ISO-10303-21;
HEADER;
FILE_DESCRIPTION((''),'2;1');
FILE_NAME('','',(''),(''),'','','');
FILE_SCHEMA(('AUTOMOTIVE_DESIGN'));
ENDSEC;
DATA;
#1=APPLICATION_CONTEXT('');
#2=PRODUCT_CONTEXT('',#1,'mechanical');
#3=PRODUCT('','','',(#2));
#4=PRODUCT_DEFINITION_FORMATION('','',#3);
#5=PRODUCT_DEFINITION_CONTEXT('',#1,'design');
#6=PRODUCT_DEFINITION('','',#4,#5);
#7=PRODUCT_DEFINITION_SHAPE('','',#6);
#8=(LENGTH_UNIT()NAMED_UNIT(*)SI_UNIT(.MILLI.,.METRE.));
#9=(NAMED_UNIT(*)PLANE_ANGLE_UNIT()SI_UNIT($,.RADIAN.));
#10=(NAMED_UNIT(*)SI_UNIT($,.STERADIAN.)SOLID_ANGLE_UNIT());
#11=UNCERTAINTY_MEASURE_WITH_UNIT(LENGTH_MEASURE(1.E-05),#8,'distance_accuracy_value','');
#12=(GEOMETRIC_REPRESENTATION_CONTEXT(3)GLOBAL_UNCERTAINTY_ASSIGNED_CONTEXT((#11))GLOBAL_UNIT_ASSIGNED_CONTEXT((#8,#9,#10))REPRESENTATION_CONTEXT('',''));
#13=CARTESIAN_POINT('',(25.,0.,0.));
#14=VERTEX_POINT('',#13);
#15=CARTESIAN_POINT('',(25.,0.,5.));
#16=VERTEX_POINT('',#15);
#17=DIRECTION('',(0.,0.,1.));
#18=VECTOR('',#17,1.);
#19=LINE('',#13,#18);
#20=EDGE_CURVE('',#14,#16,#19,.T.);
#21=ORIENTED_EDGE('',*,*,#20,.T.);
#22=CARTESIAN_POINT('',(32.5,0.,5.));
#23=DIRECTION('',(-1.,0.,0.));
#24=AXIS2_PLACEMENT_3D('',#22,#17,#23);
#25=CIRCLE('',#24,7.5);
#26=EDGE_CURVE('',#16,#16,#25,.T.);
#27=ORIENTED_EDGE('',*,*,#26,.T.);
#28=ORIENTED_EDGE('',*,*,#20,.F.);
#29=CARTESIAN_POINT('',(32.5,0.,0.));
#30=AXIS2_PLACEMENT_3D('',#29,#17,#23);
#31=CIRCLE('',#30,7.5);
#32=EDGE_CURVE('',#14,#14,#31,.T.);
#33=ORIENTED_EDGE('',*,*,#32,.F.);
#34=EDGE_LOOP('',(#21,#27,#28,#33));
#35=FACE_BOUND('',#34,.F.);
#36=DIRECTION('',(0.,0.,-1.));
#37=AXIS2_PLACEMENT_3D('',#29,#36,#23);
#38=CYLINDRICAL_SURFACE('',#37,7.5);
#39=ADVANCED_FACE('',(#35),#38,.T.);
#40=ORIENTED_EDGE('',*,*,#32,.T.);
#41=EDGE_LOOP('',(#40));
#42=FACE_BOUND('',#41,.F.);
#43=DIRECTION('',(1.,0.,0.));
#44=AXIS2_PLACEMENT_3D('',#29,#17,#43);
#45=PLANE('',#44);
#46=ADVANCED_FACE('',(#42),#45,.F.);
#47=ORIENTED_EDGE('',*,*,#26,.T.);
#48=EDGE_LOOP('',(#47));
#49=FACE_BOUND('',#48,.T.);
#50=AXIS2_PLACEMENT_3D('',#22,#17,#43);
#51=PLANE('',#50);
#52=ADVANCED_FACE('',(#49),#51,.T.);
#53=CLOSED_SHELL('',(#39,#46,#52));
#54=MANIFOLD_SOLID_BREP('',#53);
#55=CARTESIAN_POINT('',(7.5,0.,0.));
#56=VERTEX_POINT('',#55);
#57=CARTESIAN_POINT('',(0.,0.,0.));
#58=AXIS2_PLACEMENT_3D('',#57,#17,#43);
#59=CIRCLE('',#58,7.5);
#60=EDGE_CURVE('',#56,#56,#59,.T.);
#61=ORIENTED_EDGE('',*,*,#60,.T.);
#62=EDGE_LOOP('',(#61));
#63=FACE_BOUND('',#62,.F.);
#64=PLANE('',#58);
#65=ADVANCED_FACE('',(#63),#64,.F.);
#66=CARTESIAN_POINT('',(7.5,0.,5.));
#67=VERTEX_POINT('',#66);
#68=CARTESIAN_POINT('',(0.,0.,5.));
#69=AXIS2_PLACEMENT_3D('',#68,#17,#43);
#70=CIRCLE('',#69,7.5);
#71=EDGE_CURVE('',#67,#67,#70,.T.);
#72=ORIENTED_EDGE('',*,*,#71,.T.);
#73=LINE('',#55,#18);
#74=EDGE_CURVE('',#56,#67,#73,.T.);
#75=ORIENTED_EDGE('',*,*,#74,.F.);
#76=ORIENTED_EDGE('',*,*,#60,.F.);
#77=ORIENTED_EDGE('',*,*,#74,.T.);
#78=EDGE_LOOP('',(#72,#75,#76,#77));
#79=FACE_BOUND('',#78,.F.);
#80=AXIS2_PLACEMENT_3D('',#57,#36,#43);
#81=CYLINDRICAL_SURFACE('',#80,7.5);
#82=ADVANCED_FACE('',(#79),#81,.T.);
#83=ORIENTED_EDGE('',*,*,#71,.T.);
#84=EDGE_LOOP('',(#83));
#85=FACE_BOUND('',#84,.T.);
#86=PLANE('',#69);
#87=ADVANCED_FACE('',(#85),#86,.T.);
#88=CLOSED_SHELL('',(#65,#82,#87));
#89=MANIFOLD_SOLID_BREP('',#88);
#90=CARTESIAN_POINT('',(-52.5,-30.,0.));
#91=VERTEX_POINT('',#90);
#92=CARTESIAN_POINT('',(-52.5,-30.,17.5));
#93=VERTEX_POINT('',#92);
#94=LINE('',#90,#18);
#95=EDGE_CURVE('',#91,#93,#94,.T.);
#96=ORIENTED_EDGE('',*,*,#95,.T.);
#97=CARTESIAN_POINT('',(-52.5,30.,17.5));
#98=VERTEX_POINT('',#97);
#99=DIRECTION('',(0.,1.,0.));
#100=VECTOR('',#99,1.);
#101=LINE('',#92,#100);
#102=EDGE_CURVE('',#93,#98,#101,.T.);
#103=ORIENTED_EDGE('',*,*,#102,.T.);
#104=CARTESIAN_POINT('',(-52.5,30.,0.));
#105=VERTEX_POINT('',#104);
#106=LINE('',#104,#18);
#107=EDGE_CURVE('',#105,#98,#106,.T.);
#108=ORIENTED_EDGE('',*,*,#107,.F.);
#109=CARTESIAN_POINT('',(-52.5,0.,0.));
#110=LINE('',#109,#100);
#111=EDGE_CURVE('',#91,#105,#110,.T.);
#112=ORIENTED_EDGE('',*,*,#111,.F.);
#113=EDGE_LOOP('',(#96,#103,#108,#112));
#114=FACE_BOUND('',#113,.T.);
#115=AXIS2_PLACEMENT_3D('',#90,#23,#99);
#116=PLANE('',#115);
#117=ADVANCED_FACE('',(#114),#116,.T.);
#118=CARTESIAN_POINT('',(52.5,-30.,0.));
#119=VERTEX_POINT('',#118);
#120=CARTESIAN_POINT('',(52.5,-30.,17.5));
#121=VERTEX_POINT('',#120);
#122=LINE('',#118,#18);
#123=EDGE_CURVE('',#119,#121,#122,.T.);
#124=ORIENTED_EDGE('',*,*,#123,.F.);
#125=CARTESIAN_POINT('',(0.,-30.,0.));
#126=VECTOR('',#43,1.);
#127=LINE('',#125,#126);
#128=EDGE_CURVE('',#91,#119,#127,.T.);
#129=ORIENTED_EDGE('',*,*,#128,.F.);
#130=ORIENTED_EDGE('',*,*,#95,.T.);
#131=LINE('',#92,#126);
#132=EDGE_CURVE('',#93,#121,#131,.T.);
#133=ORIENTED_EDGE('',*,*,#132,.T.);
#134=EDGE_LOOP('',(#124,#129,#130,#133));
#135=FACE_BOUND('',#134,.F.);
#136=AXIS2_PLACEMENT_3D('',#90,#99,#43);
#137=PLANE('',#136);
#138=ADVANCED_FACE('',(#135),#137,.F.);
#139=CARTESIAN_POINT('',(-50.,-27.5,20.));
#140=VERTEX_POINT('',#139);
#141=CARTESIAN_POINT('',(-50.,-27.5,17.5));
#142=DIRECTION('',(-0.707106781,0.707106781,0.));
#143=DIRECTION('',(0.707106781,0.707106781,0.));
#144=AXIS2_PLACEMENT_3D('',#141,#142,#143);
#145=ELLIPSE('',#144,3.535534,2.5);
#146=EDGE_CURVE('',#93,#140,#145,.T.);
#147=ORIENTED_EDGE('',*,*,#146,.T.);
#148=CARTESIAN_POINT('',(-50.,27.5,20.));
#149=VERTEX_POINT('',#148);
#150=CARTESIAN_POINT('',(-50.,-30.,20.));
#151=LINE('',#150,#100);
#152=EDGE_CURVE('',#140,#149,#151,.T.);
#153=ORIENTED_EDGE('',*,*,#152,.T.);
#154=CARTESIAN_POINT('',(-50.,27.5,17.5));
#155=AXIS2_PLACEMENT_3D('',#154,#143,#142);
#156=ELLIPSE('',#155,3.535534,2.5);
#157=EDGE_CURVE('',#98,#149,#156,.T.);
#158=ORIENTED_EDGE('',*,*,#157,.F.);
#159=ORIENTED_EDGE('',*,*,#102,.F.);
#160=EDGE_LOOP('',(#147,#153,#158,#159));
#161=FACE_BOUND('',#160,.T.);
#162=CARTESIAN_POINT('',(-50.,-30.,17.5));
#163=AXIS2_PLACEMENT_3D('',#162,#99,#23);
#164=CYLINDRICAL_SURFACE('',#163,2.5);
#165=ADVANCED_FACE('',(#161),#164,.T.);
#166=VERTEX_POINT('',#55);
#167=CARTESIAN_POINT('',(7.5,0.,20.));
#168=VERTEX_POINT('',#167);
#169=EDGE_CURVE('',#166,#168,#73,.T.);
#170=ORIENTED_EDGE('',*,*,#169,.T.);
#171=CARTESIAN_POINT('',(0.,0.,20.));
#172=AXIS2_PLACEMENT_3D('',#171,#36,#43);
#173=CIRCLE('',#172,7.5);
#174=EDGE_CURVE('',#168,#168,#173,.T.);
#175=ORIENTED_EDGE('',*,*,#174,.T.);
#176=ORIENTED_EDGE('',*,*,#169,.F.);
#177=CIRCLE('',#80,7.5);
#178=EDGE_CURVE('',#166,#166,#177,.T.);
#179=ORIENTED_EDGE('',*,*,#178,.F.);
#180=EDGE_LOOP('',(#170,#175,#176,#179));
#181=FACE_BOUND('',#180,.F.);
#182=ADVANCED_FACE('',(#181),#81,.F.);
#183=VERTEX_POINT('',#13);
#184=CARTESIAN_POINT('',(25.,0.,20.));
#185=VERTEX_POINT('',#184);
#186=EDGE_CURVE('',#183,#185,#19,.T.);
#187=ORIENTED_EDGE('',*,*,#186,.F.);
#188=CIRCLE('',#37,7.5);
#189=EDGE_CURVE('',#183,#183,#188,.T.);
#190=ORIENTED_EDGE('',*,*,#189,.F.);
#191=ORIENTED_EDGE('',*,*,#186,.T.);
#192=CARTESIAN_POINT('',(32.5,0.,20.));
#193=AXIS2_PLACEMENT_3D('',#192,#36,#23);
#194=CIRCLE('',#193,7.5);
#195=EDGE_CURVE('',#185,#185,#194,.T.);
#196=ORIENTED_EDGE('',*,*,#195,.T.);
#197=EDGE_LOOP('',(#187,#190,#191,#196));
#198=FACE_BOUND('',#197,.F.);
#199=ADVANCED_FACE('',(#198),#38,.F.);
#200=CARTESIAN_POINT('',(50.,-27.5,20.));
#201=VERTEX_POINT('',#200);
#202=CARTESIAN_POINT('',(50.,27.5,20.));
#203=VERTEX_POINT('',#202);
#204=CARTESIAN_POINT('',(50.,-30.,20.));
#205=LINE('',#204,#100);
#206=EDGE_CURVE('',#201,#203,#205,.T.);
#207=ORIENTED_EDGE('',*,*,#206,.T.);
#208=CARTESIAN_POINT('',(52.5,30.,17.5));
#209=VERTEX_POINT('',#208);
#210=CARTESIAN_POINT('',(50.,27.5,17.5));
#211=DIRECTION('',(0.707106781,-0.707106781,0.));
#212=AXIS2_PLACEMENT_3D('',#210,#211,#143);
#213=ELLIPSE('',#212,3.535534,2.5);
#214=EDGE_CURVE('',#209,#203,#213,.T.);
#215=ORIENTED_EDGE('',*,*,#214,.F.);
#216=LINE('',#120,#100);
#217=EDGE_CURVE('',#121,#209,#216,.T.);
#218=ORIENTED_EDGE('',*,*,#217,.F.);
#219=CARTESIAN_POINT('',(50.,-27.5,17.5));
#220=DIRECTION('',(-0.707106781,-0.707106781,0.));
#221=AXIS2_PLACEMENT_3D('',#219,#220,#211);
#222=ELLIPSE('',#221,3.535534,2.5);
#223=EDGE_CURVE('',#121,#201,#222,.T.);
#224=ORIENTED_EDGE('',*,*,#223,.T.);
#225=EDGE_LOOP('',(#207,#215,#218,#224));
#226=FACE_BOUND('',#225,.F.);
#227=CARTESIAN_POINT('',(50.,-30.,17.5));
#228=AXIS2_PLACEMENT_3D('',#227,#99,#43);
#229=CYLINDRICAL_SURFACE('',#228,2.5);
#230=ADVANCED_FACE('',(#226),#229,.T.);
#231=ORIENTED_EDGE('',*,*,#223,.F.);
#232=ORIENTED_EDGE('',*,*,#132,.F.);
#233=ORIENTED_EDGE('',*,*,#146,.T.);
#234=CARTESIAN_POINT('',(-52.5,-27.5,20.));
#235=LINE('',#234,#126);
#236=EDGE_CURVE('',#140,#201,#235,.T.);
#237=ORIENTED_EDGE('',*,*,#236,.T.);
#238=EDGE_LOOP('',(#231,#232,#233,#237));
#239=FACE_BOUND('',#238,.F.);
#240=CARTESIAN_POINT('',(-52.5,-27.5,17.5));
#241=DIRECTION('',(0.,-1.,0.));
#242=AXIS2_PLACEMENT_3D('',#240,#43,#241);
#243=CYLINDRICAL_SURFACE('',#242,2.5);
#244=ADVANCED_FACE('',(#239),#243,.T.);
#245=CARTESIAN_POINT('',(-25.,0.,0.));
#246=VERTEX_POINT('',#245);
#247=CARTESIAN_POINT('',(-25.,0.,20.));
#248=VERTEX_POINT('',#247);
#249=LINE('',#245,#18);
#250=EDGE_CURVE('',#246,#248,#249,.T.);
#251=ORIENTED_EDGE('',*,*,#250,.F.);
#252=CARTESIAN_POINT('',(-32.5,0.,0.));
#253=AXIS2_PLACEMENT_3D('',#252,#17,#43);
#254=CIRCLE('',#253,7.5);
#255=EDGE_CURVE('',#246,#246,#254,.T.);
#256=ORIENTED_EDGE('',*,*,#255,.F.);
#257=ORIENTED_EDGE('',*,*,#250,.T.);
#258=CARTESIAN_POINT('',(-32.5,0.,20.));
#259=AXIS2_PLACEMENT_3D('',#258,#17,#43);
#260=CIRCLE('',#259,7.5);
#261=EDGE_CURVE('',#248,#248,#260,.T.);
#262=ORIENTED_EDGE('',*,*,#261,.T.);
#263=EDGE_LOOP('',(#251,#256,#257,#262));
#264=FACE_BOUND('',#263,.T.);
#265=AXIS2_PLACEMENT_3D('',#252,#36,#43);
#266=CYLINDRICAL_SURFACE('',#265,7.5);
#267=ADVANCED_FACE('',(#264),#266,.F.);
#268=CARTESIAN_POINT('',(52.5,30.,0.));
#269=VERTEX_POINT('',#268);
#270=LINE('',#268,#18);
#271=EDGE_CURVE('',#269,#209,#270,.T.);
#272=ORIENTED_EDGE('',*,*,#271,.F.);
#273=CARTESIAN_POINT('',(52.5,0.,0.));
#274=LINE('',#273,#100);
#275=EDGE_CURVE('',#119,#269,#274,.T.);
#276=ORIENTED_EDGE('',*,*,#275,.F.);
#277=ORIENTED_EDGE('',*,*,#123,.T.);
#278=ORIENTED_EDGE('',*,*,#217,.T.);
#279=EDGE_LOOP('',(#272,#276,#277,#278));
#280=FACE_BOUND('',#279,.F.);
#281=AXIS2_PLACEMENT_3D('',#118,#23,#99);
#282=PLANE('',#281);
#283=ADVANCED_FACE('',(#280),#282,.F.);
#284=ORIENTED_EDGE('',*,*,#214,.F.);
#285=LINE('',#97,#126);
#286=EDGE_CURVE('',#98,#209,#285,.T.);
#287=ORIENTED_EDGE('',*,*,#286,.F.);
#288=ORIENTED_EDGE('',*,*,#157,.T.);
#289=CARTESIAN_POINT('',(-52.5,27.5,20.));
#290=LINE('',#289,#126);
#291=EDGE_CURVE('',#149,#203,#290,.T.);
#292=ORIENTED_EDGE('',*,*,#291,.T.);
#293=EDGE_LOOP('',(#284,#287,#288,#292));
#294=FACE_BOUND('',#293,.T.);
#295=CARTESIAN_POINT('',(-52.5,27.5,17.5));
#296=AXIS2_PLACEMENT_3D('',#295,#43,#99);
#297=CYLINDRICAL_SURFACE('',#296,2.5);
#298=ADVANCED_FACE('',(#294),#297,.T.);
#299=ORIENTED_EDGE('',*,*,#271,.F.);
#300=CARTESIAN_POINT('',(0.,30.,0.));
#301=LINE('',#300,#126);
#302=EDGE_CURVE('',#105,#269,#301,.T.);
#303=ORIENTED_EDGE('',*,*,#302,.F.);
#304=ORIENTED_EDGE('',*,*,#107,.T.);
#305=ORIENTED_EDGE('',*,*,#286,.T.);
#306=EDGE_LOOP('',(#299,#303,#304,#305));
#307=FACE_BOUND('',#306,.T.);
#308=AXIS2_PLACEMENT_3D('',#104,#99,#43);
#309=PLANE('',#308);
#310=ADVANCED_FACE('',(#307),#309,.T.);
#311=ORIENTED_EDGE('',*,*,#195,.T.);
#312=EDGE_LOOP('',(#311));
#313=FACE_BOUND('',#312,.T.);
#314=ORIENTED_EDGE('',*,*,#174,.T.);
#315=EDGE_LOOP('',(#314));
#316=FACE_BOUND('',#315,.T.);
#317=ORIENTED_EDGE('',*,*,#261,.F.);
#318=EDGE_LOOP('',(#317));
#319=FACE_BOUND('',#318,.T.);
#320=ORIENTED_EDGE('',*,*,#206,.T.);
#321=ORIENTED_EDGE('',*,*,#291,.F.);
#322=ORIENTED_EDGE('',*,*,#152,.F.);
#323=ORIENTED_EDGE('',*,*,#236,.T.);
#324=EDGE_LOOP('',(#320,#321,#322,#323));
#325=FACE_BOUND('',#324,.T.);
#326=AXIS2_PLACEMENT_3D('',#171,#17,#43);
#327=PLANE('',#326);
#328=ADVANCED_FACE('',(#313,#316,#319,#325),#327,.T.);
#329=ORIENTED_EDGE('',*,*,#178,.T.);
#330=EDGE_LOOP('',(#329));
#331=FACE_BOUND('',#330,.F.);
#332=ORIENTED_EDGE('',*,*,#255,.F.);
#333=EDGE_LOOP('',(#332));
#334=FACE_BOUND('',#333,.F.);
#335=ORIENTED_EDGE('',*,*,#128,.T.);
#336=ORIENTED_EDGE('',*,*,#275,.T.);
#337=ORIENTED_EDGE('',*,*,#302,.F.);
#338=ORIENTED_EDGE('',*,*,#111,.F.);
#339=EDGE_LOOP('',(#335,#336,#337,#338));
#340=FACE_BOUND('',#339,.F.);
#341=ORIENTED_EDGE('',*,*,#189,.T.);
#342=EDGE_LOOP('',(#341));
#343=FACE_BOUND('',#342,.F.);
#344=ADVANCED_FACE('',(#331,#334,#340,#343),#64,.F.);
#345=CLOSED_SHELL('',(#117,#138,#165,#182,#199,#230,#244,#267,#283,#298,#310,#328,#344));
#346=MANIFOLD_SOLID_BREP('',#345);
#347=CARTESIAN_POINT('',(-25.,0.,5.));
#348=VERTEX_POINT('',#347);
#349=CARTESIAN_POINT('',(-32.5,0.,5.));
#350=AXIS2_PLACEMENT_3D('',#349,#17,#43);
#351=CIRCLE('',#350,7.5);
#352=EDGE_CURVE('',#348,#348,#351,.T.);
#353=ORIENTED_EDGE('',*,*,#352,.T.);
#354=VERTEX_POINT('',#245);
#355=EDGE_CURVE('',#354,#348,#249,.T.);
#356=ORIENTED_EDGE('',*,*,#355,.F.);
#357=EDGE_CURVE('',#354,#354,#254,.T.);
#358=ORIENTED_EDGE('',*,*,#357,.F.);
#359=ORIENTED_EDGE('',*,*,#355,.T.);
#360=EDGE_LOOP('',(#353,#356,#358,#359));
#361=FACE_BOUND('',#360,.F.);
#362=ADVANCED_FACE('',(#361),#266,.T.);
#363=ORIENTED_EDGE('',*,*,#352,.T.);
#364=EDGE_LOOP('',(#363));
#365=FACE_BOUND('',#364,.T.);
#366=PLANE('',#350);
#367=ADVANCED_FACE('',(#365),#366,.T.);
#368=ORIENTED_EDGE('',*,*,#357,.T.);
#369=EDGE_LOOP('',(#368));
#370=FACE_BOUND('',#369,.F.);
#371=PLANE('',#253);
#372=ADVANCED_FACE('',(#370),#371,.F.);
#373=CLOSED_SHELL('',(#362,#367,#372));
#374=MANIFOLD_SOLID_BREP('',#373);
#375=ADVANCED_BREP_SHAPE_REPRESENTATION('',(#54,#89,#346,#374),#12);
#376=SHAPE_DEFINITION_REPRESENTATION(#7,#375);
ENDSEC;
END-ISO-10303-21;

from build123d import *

# Parameters (mm, degrees)
F0_W     = 105
F0_H     = 60
F0_R     = 7.5
F1_DEPTH = 20
F2_DEPTH = 5
F3_R     = 2.5


with BuildPart() as f1:
    # F0 (on Top) → F1 (new body)
    with BuildSketch(Plane.XY):
        Rectangle(F0_W, F0_H)
        with Locations((-32.5, 0)):
            Circle(F0_R, mode=Mode.SUBTRACT)
        with BuildLine():
            ThreePointArc((-7.5, 0), (0, 7.5), (7.5, 0))
            ThreePointArc((7.5, 0), (0, -7.5), (-7.5, 0))
        make_face(mode=Mode.SUBTRACT)
        with BuildLine():
            ThreePointArc((40, 0), (32.5, -7.5), (25, 0))
            ThreePointArc((25, 0), (32.5, 7.5), (40, 0))
        make_face(mode=Mode.SUBTRACT)
    extrude(amount=F1_DEPTH)

    # F3
    f3_edges = [f1.edges().sort_by_distance(p)[0] for p in [
        (0, -30, 20),
        (-52.5, 0, 20),
        (0, 30, 20),
        (52.5, 0, 20),
    ]]
    fillet(f3_edges, radius=F3_R)


with BuildPart() as f2:
    # F0 (on Top) → F2 (new body)
    with BuildSketch(Plane.XY):
        with BuildLine():
            ThreePointArc((-7.5, 0), (0, -7.5), (7.5, 0))
            ThreePointArc((7.5, 0), (0, 7.5), (-7.5, 0))
        make_face()
    extrude(amount=F2_DEPTH)


with BuildPart() as f2b:
    # F0 (on Top) → F2, piece 2 (new body)
    with BuildSketch(Plane.XY):
        with Locations((-32.5, 0)):
            Circle(F0_R)
    extrude(amount=F2_DEPTH)


with BuildPart() as f2c:
    # F0 (on Top) → F2, piece 3 (new body)
    with BuildSketch(Plane.XY):
        with BuildLine():
            ThreePointArc((40, 0), (32.5, 7.5), (25, 0))
            ThreePointArc((25, 0), (32.5, -7.5), (40, 0))
        make_face()
    extrude(amount=F2_DEPTH)


solid = Compound([f1.part, f2.part, f2b.part, f2c.part])
